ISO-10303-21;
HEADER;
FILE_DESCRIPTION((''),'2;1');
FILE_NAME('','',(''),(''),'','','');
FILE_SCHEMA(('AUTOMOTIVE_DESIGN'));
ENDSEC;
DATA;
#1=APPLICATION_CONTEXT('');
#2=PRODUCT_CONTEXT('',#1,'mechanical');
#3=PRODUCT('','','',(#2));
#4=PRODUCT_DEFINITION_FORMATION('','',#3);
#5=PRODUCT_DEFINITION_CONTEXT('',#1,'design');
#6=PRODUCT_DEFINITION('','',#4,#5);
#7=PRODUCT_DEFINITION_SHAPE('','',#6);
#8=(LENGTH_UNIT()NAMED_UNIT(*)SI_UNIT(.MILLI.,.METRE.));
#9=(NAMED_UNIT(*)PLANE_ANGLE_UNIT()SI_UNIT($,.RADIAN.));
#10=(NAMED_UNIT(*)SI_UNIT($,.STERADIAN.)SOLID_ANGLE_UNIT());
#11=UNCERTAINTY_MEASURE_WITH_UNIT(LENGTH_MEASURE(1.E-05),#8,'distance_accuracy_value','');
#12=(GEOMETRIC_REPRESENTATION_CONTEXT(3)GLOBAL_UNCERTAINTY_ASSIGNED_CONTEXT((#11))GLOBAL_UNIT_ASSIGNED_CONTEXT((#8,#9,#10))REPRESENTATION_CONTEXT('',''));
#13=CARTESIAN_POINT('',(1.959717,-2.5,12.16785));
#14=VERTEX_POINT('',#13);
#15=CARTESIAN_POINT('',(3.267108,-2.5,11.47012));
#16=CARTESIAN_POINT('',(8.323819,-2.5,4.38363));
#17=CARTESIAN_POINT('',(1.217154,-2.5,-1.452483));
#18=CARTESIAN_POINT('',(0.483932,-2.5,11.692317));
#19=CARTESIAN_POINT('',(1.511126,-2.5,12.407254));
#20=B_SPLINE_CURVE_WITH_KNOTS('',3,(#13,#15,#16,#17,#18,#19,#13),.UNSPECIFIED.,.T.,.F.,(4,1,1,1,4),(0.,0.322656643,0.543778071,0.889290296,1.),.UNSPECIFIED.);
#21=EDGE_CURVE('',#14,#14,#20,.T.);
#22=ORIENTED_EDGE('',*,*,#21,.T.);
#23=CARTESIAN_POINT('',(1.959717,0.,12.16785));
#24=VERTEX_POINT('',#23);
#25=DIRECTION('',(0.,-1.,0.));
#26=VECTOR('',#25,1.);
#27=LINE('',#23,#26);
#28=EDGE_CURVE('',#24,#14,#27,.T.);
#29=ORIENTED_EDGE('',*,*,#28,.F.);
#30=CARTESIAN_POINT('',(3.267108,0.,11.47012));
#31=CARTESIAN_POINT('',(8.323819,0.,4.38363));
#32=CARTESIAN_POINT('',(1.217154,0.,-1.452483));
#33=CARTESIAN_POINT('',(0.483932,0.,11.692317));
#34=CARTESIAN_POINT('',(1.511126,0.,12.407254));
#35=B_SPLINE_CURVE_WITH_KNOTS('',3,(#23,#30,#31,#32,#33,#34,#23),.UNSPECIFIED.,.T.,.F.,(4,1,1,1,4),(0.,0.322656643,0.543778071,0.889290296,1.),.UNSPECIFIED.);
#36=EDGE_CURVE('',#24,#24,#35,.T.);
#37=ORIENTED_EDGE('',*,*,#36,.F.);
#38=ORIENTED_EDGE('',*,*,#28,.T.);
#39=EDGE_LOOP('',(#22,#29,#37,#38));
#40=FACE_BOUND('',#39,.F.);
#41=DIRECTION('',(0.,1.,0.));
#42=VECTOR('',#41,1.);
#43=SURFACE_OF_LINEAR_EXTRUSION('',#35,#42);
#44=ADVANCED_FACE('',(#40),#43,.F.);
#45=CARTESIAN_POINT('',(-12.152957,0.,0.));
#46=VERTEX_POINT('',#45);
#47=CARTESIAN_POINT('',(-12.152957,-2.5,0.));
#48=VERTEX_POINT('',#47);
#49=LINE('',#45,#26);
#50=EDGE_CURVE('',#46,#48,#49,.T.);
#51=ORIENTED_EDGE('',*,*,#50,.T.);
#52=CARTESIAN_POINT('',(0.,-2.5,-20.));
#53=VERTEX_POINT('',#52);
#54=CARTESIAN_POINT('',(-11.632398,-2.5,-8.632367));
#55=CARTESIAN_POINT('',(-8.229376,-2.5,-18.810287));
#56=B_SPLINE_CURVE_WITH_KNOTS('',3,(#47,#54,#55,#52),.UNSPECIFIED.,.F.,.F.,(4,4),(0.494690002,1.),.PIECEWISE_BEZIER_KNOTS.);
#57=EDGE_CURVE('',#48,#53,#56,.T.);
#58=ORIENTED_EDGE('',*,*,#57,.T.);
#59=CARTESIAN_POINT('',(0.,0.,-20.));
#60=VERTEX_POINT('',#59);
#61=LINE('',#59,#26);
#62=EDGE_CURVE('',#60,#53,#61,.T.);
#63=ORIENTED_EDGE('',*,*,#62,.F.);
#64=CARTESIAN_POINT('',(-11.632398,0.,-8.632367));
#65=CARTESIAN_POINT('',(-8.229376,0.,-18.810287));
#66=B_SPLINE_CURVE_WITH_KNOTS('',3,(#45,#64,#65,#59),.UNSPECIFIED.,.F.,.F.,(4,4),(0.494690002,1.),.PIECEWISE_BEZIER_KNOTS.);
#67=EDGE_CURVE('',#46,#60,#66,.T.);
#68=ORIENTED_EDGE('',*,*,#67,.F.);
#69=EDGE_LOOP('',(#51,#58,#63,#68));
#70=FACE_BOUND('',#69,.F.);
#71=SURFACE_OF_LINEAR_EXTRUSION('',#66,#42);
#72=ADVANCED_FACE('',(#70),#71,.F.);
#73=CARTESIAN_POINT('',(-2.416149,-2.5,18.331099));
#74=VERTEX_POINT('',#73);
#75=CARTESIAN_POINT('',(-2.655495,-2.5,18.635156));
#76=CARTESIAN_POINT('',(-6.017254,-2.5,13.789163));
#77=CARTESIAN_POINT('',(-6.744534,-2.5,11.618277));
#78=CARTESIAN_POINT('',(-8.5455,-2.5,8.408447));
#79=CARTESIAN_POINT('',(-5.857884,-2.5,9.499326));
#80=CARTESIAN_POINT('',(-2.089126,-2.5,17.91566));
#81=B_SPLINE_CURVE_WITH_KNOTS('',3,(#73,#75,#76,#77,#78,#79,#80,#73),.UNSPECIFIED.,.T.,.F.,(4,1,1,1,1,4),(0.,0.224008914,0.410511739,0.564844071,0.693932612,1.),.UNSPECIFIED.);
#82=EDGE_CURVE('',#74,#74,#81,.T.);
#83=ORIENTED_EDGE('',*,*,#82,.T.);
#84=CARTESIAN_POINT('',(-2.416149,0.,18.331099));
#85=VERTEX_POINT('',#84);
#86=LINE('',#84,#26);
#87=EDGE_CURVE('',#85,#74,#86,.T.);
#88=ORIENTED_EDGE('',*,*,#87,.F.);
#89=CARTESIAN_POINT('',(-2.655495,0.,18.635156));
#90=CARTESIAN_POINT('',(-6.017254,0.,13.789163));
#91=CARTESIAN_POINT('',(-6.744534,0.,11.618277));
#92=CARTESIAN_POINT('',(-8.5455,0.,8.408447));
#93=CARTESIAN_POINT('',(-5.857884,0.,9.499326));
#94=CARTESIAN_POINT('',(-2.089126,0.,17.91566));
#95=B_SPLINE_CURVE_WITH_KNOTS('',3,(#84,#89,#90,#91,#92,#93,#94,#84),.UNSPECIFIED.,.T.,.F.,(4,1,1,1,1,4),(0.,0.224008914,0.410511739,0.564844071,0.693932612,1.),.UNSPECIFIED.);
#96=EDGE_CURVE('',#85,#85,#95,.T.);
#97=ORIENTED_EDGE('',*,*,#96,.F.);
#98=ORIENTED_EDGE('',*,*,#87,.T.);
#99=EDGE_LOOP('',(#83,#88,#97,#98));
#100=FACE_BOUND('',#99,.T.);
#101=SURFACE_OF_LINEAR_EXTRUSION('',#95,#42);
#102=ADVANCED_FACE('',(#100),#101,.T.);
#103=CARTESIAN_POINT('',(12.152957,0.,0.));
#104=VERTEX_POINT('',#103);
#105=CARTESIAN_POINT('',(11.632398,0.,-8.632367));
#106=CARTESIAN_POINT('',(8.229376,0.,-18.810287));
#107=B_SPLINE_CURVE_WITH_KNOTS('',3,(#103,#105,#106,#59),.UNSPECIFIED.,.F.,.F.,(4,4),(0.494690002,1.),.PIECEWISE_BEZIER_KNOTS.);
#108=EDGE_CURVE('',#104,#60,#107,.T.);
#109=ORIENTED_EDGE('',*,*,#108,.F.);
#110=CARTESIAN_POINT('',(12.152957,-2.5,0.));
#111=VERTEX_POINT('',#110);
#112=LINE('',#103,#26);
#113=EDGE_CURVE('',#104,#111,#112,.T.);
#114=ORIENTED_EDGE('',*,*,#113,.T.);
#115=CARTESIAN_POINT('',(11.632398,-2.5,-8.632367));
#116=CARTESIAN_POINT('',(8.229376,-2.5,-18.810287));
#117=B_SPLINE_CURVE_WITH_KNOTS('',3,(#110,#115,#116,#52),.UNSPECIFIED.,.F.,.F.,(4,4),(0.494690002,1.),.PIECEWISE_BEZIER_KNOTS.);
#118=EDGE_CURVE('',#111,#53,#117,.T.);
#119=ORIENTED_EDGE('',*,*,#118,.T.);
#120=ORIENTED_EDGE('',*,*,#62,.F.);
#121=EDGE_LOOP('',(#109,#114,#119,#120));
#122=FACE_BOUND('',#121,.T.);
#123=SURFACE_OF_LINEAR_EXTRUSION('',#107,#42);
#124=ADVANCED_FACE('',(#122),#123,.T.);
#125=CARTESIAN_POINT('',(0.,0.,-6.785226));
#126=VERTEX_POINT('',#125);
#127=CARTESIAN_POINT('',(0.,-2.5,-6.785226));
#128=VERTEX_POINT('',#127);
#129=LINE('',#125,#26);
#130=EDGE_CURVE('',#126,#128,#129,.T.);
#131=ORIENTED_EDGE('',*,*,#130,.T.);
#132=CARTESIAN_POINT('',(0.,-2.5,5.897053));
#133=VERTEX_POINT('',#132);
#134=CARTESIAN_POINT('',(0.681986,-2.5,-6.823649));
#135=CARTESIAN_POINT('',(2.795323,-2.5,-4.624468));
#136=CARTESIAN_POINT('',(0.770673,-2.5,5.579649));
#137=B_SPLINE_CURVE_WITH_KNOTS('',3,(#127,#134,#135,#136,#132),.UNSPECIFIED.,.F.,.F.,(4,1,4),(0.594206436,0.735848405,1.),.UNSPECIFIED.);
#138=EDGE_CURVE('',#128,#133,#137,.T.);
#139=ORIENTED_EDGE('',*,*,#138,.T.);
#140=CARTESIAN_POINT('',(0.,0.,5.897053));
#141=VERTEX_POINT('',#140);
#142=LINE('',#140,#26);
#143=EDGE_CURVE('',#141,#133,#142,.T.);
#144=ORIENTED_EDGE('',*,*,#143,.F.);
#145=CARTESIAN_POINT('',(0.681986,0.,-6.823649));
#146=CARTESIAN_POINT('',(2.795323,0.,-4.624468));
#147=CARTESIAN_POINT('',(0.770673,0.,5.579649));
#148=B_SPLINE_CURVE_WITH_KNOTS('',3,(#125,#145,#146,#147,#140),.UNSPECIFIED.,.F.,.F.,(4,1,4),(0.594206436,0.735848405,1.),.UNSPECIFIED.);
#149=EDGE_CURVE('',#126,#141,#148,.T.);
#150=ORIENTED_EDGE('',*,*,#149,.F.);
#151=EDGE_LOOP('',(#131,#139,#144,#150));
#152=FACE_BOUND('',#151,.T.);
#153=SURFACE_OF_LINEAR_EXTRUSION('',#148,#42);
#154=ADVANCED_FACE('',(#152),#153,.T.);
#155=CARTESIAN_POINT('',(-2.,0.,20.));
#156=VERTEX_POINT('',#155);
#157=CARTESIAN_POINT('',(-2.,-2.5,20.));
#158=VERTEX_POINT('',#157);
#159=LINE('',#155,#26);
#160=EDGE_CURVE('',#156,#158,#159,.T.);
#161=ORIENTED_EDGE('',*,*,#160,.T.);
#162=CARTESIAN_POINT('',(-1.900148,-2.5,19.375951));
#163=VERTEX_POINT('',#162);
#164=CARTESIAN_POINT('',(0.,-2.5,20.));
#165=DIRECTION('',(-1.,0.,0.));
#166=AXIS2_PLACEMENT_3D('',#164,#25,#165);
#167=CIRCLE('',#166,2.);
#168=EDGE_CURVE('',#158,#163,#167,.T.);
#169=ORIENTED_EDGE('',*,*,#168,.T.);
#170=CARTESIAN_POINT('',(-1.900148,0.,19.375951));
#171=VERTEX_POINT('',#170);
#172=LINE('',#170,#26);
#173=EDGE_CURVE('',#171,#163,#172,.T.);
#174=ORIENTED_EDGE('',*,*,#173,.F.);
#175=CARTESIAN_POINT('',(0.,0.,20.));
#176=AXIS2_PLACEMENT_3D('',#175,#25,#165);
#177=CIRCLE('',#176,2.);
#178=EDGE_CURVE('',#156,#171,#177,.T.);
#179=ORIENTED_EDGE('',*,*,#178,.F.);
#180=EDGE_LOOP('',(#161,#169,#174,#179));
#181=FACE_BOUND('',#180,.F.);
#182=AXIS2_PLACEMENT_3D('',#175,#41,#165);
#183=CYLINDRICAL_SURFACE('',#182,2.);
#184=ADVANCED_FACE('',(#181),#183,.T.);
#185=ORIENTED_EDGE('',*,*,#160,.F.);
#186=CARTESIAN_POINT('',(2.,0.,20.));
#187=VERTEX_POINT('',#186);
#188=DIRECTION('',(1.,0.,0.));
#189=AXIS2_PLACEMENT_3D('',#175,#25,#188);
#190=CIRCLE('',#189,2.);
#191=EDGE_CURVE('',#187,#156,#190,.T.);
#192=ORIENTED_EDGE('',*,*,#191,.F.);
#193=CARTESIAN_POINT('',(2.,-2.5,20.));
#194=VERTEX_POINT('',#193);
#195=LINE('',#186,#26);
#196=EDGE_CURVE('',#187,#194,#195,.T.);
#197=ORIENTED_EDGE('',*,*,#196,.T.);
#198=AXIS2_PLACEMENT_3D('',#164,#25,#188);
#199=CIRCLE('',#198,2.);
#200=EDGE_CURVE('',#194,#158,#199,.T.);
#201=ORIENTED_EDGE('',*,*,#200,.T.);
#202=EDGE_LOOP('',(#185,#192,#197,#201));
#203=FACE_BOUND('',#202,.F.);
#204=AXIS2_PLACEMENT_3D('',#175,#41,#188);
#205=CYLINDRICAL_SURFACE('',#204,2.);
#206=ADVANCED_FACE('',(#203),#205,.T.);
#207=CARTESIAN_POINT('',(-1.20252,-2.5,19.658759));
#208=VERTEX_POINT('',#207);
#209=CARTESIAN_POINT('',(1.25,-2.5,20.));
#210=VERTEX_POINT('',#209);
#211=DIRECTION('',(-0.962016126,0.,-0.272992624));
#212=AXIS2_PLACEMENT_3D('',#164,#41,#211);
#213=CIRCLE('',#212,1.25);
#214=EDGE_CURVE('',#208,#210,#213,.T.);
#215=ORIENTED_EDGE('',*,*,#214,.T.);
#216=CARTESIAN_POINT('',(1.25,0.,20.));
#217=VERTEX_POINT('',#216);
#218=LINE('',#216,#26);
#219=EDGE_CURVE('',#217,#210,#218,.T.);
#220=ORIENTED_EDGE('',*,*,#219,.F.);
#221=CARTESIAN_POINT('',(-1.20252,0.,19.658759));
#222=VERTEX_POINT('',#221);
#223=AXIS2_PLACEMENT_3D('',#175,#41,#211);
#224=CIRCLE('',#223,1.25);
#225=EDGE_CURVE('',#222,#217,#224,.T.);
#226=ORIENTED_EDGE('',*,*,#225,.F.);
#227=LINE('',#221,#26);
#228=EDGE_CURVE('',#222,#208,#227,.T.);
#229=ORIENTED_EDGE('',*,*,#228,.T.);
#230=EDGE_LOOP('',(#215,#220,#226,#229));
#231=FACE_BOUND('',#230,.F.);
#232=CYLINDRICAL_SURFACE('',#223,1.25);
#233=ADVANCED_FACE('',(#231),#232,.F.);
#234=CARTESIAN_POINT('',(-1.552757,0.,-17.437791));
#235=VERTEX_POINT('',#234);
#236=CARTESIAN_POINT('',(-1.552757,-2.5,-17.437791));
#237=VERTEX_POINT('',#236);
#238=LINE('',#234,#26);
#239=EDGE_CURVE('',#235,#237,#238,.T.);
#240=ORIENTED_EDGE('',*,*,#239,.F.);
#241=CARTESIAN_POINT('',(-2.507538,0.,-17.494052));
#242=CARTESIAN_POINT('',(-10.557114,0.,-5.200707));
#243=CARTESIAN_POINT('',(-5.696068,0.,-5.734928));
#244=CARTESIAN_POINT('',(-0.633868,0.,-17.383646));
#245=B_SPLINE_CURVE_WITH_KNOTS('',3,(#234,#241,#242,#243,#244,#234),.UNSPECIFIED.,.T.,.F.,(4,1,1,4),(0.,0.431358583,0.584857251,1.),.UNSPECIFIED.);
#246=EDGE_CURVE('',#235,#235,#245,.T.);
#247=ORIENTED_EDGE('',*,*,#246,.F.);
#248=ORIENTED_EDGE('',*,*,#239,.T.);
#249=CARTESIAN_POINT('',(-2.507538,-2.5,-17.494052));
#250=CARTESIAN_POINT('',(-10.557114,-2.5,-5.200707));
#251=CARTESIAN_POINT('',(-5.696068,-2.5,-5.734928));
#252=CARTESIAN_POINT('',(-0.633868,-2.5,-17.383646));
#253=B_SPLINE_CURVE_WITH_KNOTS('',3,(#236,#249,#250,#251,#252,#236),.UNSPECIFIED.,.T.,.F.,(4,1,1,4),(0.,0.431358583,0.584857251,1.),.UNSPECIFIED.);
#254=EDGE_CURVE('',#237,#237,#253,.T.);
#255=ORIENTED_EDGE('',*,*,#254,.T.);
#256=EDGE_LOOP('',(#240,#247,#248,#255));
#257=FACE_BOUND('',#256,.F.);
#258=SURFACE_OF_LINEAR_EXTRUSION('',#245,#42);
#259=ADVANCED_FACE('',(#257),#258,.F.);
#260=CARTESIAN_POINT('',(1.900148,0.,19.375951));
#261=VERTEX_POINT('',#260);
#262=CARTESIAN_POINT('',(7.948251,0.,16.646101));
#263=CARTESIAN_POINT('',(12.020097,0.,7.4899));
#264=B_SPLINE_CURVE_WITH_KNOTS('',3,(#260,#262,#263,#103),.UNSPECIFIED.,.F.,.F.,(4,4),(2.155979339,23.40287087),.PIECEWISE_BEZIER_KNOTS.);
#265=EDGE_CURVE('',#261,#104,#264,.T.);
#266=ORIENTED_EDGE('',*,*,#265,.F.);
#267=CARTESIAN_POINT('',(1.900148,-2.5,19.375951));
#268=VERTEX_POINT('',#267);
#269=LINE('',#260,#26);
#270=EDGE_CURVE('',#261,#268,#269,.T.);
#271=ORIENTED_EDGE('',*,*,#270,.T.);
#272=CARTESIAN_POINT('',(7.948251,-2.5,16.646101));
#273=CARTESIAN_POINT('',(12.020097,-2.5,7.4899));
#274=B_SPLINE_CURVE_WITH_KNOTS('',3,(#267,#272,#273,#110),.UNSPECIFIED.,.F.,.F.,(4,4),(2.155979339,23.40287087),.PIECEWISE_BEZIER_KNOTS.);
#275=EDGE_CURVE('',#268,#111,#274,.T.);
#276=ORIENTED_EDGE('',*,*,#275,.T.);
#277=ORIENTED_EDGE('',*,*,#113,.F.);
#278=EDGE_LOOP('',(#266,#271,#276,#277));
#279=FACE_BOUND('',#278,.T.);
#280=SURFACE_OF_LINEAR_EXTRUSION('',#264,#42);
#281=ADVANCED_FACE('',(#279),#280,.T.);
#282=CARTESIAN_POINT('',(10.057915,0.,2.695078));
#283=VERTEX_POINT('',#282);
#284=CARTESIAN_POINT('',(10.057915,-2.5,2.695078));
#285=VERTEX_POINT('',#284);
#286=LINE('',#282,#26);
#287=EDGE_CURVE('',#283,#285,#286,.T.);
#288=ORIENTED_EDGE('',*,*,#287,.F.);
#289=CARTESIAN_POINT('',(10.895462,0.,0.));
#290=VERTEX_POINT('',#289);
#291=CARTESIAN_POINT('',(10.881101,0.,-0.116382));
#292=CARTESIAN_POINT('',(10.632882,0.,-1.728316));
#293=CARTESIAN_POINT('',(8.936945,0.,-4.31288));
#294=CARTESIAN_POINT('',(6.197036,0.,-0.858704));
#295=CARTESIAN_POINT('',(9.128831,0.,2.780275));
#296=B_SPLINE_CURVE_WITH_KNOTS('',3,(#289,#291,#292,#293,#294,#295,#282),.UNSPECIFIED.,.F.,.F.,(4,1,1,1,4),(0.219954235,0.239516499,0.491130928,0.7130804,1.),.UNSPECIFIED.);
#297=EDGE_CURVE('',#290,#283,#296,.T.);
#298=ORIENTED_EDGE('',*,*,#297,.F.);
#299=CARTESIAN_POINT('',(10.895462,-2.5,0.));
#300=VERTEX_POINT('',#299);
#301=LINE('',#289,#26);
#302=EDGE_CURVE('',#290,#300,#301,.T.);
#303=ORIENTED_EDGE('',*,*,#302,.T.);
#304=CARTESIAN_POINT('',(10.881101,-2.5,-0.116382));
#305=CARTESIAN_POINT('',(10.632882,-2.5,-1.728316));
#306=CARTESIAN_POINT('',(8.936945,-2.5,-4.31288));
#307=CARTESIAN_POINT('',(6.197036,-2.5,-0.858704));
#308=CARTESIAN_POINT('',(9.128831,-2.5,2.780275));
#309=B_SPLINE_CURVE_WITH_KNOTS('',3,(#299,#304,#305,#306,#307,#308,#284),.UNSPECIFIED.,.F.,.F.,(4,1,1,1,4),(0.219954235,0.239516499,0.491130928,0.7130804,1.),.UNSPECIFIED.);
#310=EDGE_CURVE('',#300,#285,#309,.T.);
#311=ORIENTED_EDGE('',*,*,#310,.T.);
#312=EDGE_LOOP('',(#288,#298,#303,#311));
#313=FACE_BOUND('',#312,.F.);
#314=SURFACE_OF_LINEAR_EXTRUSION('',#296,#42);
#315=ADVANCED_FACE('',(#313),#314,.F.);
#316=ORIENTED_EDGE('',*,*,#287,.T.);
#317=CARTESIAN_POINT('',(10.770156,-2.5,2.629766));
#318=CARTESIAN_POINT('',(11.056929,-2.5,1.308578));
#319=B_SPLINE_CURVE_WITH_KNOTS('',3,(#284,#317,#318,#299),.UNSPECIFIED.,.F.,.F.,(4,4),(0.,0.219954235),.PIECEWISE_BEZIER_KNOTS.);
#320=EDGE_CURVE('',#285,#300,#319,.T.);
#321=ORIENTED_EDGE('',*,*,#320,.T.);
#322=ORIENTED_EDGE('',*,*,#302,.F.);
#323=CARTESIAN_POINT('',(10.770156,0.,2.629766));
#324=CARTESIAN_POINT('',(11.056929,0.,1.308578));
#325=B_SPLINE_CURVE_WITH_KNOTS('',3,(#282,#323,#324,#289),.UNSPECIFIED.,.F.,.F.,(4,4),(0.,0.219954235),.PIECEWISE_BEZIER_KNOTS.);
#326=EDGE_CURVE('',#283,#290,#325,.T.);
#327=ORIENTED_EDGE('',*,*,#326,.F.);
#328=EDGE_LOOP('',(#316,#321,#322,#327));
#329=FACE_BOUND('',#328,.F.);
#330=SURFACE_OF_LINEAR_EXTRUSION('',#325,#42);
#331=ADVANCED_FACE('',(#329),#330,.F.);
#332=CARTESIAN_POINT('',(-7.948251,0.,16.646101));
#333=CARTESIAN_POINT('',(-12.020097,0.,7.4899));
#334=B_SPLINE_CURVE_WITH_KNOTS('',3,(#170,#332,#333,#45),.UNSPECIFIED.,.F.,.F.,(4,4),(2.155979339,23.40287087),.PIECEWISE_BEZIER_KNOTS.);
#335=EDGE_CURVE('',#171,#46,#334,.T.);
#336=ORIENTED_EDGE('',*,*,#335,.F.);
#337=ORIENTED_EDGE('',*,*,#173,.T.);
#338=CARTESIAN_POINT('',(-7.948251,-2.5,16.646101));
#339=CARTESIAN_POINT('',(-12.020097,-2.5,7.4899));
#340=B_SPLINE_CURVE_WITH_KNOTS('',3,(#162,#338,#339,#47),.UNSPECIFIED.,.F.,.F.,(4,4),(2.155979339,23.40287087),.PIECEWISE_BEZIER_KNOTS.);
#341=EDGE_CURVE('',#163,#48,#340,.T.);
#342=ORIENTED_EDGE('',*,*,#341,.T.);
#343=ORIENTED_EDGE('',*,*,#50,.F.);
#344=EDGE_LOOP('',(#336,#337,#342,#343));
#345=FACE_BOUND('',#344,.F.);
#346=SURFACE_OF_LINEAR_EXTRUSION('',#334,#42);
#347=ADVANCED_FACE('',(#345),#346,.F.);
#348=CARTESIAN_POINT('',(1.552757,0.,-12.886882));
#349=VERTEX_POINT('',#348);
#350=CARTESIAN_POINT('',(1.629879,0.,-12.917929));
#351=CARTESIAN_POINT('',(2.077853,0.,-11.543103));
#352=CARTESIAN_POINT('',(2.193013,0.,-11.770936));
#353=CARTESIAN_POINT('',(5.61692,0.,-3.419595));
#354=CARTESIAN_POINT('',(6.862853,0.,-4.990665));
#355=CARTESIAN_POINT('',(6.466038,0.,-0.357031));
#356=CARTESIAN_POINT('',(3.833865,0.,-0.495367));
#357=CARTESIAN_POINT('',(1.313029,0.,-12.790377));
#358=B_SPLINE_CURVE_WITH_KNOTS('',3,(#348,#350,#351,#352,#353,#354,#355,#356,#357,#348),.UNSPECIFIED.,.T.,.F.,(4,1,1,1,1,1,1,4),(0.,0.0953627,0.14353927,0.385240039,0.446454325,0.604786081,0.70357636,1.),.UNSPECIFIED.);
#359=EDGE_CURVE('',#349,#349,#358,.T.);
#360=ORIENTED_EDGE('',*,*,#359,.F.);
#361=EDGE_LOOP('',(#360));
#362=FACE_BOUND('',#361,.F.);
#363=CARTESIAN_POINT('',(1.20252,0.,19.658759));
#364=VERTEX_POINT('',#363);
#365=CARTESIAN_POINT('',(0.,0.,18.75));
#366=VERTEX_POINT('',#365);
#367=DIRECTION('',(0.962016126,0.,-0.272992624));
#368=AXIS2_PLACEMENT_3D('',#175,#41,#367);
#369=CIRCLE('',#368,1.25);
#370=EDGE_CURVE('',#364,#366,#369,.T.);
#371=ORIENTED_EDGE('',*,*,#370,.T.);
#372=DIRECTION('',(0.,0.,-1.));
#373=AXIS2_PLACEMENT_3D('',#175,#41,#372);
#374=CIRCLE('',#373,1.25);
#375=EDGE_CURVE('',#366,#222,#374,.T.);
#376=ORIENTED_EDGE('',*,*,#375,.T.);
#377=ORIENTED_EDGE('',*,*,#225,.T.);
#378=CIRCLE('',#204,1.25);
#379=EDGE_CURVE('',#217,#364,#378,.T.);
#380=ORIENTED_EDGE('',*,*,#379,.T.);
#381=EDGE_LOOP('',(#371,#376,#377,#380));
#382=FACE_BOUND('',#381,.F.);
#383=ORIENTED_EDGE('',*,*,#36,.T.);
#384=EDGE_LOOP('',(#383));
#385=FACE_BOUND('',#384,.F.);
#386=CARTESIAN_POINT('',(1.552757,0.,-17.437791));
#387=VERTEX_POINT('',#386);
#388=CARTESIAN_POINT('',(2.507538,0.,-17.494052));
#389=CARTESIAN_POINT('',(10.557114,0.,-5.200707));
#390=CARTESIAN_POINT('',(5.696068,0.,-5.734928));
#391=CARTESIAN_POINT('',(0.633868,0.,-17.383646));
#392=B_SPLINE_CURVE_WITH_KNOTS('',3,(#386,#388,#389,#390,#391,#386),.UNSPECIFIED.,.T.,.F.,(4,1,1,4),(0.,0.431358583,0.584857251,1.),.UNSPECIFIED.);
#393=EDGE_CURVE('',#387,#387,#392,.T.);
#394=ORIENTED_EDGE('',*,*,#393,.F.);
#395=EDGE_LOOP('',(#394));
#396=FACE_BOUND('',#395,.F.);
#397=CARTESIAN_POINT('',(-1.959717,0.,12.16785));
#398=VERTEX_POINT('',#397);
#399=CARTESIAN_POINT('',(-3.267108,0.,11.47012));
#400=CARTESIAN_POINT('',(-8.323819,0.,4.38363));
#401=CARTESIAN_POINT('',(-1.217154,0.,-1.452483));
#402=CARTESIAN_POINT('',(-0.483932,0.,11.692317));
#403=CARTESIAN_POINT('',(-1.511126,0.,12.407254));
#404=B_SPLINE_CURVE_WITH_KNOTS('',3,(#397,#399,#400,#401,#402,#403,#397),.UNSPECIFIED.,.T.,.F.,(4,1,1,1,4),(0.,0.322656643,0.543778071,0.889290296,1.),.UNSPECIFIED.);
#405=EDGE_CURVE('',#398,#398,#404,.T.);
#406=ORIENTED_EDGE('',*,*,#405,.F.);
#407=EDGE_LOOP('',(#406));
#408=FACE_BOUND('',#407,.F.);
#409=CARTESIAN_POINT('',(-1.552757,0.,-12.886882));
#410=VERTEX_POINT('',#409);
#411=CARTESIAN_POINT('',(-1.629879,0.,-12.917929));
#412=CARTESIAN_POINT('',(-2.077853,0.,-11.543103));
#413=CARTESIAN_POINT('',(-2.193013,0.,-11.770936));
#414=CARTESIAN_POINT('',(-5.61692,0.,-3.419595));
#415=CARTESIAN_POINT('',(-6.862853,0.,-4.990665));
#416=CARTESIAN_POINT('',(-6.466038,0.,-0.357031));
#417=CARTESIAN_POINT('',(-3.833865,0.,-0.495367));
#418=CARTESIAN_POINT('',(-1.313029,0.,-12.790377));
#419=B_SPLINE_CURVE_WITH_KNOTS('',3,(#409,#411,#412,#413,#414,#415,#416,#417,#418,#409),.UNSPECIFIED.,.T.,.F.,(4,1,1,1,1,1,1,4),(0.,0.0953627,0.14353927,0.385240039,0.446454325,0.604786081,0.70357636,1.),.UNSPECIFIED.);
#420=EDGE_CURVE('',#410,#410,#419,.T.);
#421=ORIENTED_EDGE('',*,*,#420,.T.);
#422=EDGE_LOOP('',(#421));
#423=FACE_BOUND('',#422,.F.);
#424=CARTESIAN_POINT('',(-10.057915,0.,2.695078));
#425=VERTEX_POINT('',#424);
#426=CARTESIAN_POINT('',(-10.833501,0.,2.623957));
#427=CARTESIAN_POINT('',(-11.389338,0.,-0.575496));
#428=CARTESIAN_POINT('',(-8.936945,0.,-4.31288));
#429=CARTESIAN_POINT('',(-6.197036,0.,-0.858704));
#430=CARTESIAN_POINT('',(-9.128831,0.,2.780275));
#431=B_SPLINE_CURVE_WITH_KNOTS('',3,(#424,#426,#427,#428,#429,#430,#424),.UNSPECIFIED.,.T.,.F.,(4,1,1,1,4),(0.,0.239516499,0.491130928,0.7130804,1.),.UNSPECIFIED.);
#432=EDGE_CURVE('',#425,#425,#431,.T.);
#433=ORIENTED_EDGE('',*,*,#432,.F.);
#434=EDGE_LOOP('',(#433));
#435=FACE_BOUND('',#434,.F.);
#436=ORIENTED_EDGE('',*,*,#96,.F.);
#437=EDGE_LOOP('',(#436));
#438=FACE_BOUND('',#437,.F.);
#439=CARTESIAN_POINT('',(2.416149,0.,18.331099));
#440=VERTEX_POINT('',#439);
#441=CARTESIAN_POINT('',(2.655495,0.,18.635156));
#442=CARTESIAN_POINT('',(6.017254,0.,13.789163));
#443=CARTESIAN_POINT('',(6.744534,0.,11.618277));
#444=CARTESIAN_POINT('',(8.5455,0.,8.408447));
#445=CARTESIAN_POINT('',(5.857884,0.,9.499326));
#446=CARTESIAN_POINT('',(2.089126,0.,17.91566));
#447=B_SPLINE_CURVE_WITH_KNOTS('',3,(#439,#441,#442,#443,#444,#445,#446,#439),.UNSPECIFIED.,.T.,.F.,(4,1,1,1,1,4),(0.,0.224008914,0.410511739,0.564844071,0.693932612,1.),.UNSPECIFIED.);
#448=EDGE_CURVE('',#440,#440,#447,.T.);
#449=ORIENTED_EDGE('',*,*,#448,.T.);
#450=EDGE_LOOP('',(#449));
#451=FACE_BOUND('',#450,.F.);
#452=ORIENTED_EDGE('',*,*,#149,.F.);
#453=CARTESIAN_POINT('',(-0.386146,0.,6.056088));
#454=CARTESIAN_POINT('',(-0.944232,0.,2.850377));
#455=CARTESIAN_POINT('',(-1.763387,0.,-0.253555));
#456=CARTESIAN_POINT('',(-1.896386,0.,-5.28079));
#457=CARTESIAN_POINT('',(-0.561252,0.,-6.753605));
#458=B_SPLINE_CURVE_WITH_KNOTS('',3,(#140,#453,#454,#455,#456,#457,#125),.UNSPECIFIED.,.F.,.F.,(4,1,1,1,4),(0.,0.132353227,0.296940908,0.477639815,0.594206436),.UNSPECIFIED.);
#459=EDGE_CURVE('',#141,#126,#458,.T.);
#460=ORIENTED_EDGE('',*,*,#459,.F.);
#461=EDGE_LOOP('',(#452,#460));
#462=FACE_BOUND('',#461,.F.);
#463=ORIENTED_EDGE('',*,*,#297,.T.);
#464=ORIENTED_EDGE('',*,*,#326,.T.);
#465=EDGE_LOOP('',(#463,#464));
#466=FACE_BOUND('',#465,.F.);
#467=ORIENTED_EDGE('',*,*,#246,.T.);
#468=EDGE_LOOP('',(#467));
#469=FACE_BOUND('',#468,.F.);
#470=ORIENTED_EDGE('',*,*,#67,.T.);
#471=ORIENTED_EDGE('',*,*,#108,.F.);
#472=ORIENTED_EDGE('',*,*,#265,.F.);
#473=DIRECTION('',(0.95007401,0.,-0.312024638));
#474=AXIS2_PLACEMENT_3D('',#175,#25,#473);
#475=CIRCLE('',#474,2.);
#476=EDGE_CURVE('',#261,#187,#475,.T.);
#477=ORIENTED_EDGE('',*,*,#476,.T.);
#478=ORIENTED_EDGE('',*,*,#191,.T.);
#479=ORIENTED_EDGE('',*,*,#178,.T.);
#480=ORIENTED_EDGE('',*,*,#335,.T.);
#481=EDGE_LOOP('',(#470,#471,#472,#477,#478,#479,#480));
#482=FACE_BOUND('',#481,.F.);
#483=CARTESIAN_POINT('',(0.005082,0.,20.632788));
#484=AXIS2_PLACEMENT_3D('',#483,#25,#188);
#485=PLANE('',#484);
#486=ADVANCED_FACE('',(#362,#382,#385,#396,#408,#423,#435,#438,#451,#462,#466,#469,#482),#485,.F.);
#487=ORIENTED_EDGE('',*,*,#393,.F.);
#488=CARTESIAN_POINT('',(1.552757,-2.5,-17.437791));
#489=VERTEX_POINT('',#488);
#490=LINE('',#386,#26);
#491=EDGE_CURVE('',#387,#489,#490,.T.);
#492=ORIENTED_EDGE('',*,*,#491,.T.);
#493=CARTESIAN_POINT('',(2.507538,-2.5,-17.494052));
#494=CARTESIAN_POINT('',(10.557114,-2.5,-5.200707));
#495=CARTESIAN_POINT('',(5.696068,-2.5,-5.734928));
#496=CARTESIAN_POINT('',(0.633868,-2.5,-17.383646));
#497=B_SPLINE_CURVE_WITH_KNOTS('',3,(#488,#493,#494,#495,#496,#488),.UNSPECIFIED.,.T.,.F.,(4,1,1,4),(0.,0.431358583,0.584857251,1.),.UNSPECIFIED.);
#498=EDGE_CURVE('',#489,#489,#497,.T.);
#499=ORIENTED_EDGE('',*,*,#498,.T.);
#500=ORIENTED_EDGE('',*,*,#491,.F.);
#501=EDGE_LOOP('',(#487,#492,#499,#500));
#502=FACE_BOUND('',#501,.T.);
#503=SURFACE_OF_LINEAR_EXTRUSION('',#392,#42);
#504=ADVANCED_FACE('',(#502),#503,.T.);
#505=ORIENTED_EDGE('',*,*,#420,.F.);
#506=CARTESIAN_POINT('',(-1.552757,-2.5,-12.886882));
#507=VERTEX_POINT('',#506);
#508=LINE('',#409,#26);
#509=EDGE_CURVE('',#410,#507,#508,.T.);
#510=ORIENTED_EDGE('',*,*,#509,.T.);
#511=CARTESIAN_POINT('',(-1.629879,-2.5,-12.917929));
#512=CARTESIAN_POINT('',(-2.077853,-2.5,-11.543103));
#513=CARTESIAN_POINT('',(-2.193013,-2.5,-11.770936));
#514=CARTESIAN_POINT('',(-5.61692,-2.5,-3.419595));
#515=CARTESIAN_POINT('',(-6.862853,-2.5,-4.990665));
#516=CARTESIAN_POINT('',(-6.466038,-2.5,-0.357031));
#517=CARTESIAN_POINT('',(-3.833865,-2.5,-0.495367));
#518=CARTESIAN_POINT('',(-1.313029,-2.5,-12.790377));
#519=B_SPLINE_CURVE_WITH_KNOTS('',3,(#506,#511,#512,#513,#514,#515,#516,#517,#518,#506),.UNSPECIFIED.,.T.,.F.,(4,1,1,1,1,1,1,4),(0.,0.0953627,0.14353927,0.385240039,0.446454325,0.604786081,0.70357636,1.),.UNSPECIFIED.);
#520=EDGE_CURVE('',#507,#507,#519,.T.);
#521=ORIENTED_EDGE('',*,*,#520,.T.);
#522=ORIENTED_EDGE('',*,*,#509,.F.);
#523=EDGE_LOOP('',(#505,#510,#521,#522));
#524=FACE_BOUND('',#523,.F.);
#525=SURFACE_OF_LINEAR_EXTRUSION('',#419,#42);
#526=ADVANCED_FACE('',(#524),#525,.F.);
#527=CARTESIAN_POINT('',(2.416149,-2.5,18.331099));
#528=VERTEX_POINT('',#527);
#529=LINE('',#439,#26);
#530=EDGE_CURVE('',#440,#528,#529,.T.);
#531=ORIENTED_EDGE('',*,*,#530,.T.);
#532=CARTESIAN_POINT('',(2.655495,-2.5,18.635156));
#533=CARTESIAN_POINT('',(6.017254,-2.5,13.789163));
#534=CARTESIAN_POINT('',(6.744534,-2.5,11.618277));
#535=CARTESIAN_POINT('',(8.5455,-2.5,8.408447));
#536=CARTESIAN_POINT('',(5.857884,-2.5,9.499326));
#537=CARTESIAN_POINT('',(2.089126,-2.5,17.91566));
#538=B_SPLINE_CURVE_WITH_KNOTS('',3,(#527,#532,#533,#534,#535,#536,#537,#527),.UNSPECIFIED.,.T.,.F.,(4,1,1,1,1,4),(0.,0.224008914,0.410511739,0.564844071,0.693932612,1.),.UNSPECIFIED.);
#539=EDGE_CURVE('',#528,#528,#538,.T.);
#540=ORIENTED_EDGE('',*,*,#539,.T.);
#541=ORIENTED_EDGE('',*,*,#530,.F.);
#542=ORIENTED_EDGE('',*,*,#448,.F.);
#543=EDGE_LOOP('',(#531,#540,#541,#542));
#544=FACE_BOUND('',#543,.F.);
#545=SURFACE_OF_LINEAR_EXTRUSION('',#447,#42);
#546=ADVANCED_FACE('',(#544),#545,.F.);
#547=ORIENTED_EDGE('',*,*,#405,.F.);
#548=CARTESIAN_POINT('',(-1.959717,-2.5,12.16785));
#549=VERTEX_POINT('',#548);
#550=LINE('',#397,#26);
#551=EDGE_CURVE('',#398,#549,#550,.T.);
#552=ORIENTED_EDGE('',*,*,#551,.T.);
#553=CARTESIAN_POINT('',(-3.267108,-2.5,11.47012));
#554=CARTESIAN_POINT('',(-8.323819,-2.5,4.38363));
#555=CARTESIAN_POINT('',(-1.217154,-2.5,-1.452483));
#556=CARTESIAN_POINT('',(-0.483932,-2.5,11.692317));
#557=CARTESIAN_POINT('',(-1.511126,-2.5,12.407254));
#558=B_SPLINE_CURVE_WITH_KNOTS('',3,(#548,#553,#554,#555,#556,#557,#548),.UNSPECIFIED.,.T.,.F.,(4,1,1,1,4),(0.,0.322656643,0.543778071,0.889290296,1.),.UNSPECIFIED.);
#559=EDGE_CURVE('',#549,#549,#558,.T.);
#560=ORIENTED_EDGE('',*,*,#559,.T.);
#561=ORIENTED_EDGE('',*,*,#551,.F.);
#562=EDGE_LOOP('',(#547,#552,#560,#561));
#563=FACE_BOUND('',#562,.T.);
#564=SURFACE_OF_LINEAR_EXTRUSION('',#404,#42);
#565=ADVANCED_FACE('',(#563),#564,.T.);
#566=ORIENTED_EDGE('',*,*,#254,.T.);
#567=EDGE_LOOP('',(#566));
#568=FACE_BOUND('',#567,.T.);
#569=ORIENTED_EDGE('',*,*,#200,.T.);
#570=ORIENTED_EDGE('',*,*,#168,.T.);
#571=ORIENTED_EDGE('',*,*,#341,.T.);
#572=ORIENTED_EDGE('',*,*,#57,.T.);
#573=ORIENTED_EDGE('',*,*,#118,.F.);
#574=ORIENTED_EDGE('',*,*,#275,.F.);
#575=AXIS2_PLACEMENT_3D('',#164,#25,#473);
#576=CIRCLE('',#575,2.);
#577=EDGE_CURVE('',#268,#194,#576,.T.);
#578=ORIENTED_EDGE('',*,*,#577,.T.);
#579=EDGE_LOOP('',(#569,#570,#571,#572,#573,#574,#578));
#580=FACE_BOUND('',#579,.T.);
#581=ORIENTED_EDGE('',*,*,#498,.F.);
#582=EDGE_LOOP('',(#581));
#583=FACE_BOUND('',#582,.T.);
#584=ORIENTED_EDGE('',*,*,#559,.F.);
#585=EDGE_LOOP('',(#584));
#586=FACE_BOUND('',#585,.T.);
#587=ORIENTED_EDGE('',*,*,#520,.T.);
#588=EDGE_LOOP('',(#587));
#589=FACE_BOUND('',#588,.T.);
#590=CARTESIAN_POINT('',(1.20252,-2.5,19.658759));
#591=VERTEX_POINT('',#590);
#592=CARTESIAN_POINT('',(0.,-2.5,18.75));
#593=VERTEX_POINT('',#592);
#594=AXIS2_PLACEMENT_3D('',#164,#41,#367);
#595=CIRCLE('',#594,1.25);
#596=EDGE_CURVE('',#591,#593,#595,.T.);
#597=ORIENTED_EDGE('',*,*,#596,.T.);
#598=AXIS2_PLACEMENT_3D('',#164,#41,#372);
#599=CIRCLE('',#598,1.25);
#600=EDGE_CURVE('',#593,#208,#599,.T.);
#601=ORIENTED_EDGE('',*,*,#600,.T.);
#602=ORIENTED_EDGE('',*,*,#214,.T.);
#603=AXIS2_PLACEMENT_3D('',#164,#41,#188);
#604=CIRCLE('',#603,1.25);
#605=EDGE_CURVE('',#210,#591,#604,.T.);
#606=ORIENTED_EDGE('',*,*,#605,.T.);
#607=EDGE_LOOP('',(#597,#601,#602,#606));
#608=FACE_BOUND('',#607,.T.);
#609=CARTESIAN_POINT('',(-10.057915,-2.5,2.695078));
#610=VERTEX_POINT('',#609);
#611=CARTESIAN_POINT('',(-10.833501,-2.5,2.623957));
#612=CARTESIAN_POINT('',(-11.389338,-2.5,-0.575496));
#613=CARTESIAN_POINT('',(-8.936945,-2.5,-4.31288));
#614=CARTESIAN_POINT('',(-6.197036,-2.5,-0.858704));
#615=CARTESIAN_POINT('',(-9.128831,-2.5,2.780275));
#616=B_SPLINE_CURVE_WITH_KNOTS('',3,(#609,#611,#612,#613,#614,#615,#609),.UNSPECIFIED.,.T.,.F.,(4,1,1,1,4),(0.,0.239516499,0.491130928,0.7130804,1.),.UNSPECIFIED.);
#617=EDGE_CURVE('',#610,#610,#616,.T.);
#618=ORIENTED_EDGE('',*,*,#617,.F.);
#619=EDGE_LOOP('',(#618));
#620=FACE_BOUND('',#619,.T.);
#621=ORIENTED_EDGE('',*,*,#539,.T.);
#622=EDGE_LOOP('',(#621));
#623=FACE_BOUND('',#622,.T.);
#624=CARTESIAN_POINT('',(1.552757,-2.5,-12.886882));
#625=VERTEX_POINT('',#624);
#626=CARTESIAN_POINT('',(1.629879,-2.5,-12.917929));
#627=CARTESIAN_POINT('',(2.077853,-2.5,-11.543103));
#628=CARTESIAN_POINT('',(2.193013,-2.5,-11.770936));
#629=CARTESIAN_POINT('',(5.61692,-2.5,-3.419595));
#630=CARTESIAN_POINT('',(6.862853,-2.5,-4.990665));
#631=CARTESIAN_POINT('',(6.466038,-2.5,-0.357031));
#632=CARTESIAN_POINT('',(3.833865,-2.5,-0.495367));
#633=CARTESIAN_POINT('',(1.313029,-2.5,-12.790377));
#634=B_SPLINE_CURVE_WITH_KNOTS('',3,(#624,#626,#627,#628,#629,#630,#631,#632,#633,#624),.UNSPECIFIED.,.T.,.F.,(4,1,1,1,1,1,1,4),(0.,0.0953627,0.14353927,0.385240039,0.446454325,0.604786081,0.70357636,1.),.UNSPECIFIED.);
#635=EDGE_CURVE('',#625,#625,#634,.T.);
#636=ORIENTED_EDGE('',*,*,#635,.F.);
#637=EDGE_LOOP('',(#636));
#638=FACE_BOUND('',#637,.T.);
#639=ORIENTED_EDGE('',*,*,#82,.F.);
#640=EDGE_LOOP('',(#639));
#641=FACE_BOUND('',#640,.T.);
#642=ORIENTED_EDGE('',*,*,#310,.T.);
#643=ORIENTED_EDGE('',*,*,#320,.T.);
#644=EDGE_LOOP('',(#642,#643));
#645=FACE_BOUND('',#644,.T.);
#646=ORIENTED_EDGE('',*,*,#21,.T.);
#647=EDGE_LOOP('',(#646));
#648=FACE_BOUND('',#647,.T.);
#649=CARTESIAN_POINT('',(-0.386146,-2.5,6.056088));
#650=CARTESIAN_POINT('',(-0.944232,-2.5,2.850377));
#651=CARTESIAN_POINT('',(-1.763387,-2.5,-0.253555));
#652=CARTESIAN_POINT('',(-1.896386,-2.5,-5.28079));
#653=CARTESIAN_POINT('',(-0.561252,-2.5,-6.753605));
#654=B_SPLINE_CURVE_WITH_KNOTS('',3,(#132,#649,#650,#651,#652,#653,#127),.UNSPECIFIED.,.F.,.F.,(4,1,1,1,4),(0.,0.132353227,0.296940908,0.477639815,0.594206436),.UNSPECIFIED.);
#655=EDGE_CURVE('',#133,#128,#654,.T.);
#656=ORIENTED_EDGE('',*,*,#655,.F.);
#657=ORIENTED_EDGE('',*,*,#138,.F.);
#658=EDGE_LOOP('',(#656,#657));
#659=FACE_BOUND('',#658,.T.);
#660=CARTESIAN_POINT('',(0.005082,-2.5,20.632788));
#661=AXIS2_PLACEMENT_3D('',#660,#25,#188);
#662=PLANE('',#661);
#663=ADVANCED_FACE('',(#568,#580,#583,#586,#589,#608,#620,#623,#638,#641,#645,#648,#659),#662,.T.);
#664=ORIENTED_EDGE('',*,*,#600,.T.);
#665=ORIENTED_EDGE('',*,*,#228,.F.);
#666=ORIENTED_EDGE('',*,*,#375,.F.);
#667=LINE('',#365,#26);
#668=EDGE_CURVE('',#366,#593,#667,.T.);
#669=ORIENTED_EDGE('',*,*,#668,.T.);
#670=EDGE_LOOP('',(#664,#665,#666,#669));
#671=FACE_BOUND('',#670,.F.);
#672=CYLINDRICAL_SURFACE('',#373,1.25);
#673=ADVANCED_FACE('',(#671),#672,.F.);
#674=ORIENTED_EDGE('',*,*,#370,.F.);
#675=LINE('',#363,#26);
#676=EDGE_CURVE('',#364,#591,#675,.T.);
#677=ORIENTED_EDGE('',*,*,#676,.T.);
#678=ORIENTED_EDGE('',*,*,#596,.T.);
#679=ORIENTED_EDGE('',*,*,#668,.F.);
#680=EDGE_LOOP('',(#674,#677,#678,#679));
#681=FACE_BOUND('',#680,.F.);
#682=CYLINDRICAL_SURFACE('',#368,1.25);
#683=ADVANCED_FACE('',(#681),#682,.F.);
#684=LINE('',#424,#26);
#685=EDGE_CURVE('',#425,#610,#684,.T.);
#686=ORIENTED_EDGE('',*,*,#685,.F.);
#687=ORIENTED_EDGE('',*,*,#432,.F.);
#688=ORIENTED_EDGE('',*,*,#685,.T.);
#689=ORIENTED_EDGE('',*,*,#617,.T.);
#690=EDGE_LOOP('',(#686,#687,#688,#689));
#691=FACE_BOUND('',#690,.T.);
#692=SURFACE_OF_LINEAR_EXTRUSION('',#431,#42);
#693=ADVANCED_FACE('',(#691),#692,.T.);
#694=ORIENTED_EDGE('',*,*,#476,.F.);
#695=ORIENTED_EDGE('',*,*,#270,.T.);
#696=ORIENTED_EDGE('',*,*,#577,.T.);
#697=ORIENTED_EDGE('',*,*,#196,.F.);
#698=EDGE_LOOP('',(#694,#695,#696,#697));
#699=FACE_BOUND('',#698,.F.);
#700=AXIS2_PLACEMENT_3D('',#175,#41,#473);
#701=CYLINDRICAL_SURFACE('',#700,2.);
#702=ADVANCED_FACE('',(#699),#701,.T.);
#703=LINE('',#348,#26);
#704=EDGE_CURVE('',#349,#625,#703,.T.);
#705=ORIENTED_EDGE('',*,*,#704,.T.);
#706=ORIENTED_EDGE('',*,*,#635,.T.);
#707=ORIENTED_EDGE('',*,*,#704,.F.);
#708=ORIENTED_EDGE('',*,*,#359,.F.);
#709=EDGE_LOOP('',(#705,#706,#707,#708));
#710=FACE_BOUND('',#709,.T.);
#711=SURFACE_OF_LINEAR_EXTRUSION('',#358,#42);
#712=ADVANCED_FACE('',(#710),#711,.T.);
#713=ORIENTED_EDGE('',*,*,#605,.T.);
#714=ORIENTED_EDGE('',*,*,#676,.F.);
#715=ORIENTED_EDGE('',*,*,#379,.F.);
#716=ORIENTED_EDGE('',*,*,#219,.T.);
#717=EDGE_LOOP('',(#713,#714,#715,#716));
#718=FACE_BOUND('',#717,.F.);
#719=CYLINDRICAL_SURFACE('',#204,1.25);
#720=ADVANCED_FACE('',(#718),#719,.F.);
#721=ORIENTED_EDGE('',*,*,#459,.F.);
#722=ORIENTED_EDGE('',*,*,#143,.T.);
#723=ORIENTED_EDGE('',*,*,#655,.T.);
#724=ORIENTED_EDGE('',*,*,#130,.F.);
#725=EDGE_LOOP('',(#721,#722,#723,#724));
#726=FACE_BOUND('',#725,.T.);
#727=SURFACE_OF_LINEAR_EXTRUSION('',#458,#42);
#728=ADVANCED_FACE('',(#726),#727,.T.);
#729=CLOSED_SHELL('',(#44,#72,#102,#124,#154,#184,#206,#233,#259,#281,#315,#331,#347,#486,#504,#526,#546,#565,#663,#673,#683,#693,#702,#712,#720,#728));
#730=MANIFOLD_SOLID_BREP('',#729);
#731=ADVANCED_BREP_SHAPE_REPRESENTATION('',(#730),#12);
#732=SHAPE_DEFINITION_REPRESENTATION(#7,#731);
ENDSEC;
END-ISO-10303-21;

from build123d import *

# Parameters (mm, degrees)
F1_DEPTH = 2.5


with BuildPart() as f1:
    # F0 (on Front) → F1 (new body)
    with BuildSketch(Plane.XZ):
        with BuildLine():
            ThreePointArc((1.9001480208, 19.3759507221), (1.9748792421, 19.6840063603), (2, 19.9999999982))
            ThreePointArc((2, 19.9999999982), (0, 21.9999999982), (-2, 19.9999999982))
            ThreePointArc((-2, 19.9999999982), (-1.9748792421, 19.6840063603), (-1.9001480208, 19.3759507221))
            add(Edge.make_bspline(
                [(-1.202520158, 19.6587592186), (-1.4378422898, 19.5740568966), (-1.6704207632, 19.4796395721), (-1.9001480208, 19.3759507221)],
                knots=[1.3489510655, 1.3489510655, 1.3489510655, 1.3489510655, 2.1559793392, 2.1559793392, 2.1559793392, 2.1559793392], degree=3))
            ThreePointArc((-1.202520158, 19.6587592186), (-0.1722640452, 21.2380731377), (1.25, 19.9999999982))
            ThreePointArc((1.25, 19.9999999982), (1.2380731395, 19.827735953), (1.202520158, 19.6587592186))
            add(Edge.make_bspline(
                [(1.202520158, 19.6587592186), (1.4378422898, 19.5740568966), (1.6704207632, 19.4796395721), (1.9001480208, 19.3759507221)],
                knots=[1.3489510655, 1.3489510655, 1.3489510655, 1.3489510655, 2.1559793392, 2.1559793392, 2.1559793392, 2.1559793392], degree=3))
        make_face()
        with BuildLine():
            add(Edge.make_bspline(
                [(1.9001480208, 19.3759507221), (7.9482510216, 16.646101198), (12.0200971287, 7.4898998172), (12.1529570481, 0)],
                knots=[2.1559793392, 2.1559793392, 2.1559793392, 2.1559793392, 23.4028708696, 23.4028708696, 23.4028708696, 23.4028708696], degree=3))
            ThreePointArc((1.9001480208, 19.3759507221), (1.17300926, 18.3801082499), (0, 17.9999999982))
            ThreePointArc((0, 17.9999999982), (-1.17300926, 18.3801082499), (-1.9001480208, 19.3759507221))
            add(Edge.make_bspline(
                [(-1.9001480208, 19.3759507221), (-7.9482510216, 16.646101198), (-12.0200971287, 7.4898998172), (-12.1529570481, 0)],
                knots=[2.1559793392, 2.1559793392, 2.1559793392, 2.1559793392, 23.4028708696, 23.4028708696, 23.4028708696, 23.4028708696], degree=3))
            add(Edge.make_bspline(
                [(-12.1529570481, 0), (-11.6323980269, -8.6323668898), (-8.229375817, -18.8102871179), (0, -20)],
                knots=[0.4946900023, 0.4946900023, 0.4946900023, 0.4946900023, 1, 1, 1, 1], degree=3))
            add(Edge.make_bspline(
                [(12.1529570481, 0), (11.6323980269, -8.6323668898), (8.229375817, -18.8102871179), (0, -20)],
                knots=[0.4946900023, 0.4946900023, 0.4946900023, 0.4946900023, 1, 1, 1, 1], degree=3))
        make_face()
        with BuildLine():
            add(Edge.make_bspline(
                [(-1.5527566429, -17.4377914518), (-2.507538092, -17.4940520021), (-10.5571136627, -5.2007068229), (-5.6960675536, -5.7349279551), (-0.6338677843, -17.3836458744), (-1.5527566429, -17.4377914518)],
                knots=[0, 0, 0, 0, 0.4313585826, 0.5848572509, 1, 1, 1, 1], degree=3))
        make_face(mode=Mode.SUBTRACT)
        with BuildLine():
            add(Edge.make_bspline(
                [(-10.0579150021, 2.6950780302), (-10.8335012017, 2.6239571095), (-11.3893383856, -0.5754955495), (-8.9369452022, -4.3128803286), (-6.1970362856, -0.8587037773), (-9.1288312743, 2.7802746083), (-10.0579150021, 2.6950780302)],
                knots=[0, 0, 0, 0, 0.239516499, 0.4911309284, 0.7130804005, 1, 1, 1, 1], degree=3))
        make_face(mode=Mode.SUBTRACT)
        with BuildLine():
            add(Edge.make_bspline(
                [(-1.5527566429, -12.8868818283), (-1.629879466, -12.9179285722), (-2.0778528813, -11.5431030884), (-2.1930131483, -11.7709361584), (-5.6169197113, -3.4195948771), (-6.8628530205, -4.9906650673), (-6.4660380574, -0.3570307542), (-3.8338646652, -0.4953668458), (-1.3130294956, -12.7903767078), (-1.5527566429, -12.8868818283)],
                knots=[0, 0, 0, 0, 0.0953626996, 0.1435392696, 0.3852400388, 0.4464543252, 0.6047860806, 0.7035763602, 1, 1, 1, 1], degree=3))
        make_face(mode=Mode.SUBTRACT)
        with BuildLine():
            add(Edge.make_bspline(
                [(1.5527566429, -17.4377914518), (2.507538092, -17.4940520021), (10.5571136627, -5.2007068229), (5.6960675536, -5.7349279551), (0.6338677843, -17.3836458744), (1.5527566429, -17.4377914518)],
                knots=[0, 0, 0, 0, 0.4313585826, 0.5848572509, 1, 1, 1, 1], degree=3))
        make_face(mode=Mode.SUBTRACT)
        with BuildLine():
            add(Edge.make_bspline(
                [(1.5527566429, -12.8868818283), (1.629879466, -12.9179285722), (2.0778528813, -11.5431030884), (2.1930131483, -11.7709361584), (5.6169197113, -3.4195948771), (6.8628530205, -4.9906650673), (6.4660380574, -0.3570307542), (3.8338646652, -0.4953668458), (1.3130294956, -12.7903767078), (1.5527566429, -12.8868818283)],
                knots=[0, 0, 0, 0, 0.0953626996, 0.1435392696, 0.3852400388, 0.4464543252, 0.6047860806, 0.7035763602, 1, 1, 1, 1], degree=3))
        make_face(mode=Mode.SUBTRACT)
        with BuildLine():
            add(Edge.make_bspline(
                [(0, -6.7852260545), (0.6819859157, -6.823648977), (2.7953232493, -4.6244677377), (0.77067262, 5.5796490518), (0, 5.8970530517)],
                knots=[0.5942064363, 0.5942064363, 0.5942064363, 0.5942064363, 0.7358484055, 1, 1, 1, 1], degree=3))
            add(Edge.make_bspline(
                [(0, 5.8970530517), (-0.3861457229, 6.056088411), (-0.9442319679, 2.8503765697), (-1.7633874334, -0.2535547354), (-1.8963861077, -5.2807895735), (-0.5612516861, -6.7536052695), (0, -6.7852260545)],
                knots=[0, 0, 0, 0, 0.1323532273, 0.2969409084, 0.4776398149, 0.5942064363, 0.5942064363, 0.5942064363, 0.5942064363], degree=3))
        make_face(mode=Mode.SUBTRACT)
        with BuildLine():
            add(Edge.make_bspline(
                [(10.8954617152, 2e-10), (10.8811011309, -0.1163821385), (10.6328819389, -1.7283159166), (8.9369452022, -4.3128803286), (6.1970362856, -0.8587037773), (9.1288312743, 2.7802746083), (10.0579150021, 2.6950780302)],
                knots=[0.2199542347, 0.2199542347, 0.2199542347, 0.2199542347, 0.239516499, 0.4911309284, 0.7130804005, 1, 1, 1, 1], degree=3))
            add(Edge.make_bspline(
                [(10.0579150021, 2.6950780302), (10.7701559947, 2.6297658377), (11.0569292875, 1.3085777741), (10.8954617152, 2e-10)],
                knots=[0, 0, 0, 0, 0.2199542347, 0.2199542347, 0.2199542347, 0.2199542347], degree=3))
        make_face(mode=Mode.SUBTRACT)
        with BuildLine():
            add(Edge.make_bspline(
                [(-1.9597173668, 12.167849578), (-3.2671084858, 11.4701196865), (-8.3238185403, 4.3836297337), (-1.2171543721, -1.4524826127), (-0.4839324206, 11.6923173391), (-1.5111263135, 12.4072541314), (-1.9597173668, 12.167849578)],
                knots=[0, 0, 0, 0, 0.3226566431, 0.5437780707, 0.8892902963, 1, 1, 1, 1], degree=3))
        make_face(mode=Mode.SUBTRACT)
        with BuildLine():
            add(Edge.make_bspline(
                [(-2.4161490146, 18.3310989374), (-2.6554951791, 18.6351560491), (-6.0172544369, 13.7891634437), (-6.7445339964, 11.6182768527), (-8.5455002356, 8.4084474321), (-5.8578836448, 9.4993259941), (-2.0891260666, 17.9156602641), (-2.4161490146, 18.3310989374)],
                knots=[0, 0, 0, 0, 0.224008914, 0.4105117391, 0.5648440708, 0.6939326118, 1, 1, 1, 1], degree=3))
        make_face(mode=Mode.SUBTRACT)
        with BuildLine():
            add(Edge.make_bspline(
                [(1.9597173668, 12.167849578), (3.2671084858, 11.4701196865), (8.3238185403, 4.3836297337), (1.2171543721, -1.4524826127), (0.4839324206, 11.6923173391), (1.5111263135, 12.4072541314), (1.9597173668, 12.167849578)],
                knots=[0, 0, 0, 0, 0.3226566431, 0.5437780707, 0.8892902963, 1, 1, 1, 1], degree=3))
        make_face(mode=Mode.SUBTRACT)
        with BuildLine():
            add(Edge.make_bspline(
                [(2.4161490146, 18.3310989374), (2.6554951791, 18.6351560491), (6.0172544369, 13.7891634437), (6.7445339964, 11.6182768527), (8.5455002356, 8.4084474321), (5.8578836448, 9.4993259941), (2.0891260666, 17.9156602641), (2.4161490146, 18.3310989374)],
                knots=[0, 0, 0, 0, 0.224008914, 0.4105117391, 0.5648440708, 0.6939326118, 1, 1, 1, 1], degree=3))
        make_face(mode=Mode.SUBTRACT)
        with BuildLine():
            ThreePointArc((0, 17.9999999982), (1.17300926, 18.3801082499), (1.9001480208, 19.3759507221))
            add(Edge.make_bspline(
                [(1.202520158, 19.6587592186), (1.4378422898, 19.5740568966), (1.6704207632, 19.4796395721), (1.9001480208, 19.3759507221)],
                knots=[1.3489510655, 1.3489510655, 1.3489510655, 1.3489510655, 2.1559793392, 2.1559793392, 2.1559793392, 2.1559793392], degree=3))
            ThreePointArc((1.202520158, 19.6587592186), (0.753640838, 19.0027410111), (0, 18.7499999982))
            Line((0, 18.7499999982), (0, 17.9999999982))
        make_face()
        with BuildLine():
            add(Edge.make_bspline(
                [(-1.202520158, 19.6587592186), (-1.4378422898, 19.5740568966), (-1.6704207632, 19.4796395721), (-1.9001480208, 19.3759507221)],
                knots=[1.3489510655, 1.3489510655, 1.3489510655, 1.3489510655, 2.1559793392, 2.1559793392, 2.1559793392, 2.1559793392], degree=3))
            ThreePointArc((-1.9001480208, 19.3759507221), (-1.17300926, 18.3801082499), (0, 17.9999999982))
            Line((0, 17.9999999982), (0, 18.7499999982))
            ThreePointArc((0, 18.7499999982), (-0.753640838, 19.0027410111), (-1.202520158, 19.6587592186))
        make_face()
    extrude(amount=F1_DEPTH)


solid = f1.part
